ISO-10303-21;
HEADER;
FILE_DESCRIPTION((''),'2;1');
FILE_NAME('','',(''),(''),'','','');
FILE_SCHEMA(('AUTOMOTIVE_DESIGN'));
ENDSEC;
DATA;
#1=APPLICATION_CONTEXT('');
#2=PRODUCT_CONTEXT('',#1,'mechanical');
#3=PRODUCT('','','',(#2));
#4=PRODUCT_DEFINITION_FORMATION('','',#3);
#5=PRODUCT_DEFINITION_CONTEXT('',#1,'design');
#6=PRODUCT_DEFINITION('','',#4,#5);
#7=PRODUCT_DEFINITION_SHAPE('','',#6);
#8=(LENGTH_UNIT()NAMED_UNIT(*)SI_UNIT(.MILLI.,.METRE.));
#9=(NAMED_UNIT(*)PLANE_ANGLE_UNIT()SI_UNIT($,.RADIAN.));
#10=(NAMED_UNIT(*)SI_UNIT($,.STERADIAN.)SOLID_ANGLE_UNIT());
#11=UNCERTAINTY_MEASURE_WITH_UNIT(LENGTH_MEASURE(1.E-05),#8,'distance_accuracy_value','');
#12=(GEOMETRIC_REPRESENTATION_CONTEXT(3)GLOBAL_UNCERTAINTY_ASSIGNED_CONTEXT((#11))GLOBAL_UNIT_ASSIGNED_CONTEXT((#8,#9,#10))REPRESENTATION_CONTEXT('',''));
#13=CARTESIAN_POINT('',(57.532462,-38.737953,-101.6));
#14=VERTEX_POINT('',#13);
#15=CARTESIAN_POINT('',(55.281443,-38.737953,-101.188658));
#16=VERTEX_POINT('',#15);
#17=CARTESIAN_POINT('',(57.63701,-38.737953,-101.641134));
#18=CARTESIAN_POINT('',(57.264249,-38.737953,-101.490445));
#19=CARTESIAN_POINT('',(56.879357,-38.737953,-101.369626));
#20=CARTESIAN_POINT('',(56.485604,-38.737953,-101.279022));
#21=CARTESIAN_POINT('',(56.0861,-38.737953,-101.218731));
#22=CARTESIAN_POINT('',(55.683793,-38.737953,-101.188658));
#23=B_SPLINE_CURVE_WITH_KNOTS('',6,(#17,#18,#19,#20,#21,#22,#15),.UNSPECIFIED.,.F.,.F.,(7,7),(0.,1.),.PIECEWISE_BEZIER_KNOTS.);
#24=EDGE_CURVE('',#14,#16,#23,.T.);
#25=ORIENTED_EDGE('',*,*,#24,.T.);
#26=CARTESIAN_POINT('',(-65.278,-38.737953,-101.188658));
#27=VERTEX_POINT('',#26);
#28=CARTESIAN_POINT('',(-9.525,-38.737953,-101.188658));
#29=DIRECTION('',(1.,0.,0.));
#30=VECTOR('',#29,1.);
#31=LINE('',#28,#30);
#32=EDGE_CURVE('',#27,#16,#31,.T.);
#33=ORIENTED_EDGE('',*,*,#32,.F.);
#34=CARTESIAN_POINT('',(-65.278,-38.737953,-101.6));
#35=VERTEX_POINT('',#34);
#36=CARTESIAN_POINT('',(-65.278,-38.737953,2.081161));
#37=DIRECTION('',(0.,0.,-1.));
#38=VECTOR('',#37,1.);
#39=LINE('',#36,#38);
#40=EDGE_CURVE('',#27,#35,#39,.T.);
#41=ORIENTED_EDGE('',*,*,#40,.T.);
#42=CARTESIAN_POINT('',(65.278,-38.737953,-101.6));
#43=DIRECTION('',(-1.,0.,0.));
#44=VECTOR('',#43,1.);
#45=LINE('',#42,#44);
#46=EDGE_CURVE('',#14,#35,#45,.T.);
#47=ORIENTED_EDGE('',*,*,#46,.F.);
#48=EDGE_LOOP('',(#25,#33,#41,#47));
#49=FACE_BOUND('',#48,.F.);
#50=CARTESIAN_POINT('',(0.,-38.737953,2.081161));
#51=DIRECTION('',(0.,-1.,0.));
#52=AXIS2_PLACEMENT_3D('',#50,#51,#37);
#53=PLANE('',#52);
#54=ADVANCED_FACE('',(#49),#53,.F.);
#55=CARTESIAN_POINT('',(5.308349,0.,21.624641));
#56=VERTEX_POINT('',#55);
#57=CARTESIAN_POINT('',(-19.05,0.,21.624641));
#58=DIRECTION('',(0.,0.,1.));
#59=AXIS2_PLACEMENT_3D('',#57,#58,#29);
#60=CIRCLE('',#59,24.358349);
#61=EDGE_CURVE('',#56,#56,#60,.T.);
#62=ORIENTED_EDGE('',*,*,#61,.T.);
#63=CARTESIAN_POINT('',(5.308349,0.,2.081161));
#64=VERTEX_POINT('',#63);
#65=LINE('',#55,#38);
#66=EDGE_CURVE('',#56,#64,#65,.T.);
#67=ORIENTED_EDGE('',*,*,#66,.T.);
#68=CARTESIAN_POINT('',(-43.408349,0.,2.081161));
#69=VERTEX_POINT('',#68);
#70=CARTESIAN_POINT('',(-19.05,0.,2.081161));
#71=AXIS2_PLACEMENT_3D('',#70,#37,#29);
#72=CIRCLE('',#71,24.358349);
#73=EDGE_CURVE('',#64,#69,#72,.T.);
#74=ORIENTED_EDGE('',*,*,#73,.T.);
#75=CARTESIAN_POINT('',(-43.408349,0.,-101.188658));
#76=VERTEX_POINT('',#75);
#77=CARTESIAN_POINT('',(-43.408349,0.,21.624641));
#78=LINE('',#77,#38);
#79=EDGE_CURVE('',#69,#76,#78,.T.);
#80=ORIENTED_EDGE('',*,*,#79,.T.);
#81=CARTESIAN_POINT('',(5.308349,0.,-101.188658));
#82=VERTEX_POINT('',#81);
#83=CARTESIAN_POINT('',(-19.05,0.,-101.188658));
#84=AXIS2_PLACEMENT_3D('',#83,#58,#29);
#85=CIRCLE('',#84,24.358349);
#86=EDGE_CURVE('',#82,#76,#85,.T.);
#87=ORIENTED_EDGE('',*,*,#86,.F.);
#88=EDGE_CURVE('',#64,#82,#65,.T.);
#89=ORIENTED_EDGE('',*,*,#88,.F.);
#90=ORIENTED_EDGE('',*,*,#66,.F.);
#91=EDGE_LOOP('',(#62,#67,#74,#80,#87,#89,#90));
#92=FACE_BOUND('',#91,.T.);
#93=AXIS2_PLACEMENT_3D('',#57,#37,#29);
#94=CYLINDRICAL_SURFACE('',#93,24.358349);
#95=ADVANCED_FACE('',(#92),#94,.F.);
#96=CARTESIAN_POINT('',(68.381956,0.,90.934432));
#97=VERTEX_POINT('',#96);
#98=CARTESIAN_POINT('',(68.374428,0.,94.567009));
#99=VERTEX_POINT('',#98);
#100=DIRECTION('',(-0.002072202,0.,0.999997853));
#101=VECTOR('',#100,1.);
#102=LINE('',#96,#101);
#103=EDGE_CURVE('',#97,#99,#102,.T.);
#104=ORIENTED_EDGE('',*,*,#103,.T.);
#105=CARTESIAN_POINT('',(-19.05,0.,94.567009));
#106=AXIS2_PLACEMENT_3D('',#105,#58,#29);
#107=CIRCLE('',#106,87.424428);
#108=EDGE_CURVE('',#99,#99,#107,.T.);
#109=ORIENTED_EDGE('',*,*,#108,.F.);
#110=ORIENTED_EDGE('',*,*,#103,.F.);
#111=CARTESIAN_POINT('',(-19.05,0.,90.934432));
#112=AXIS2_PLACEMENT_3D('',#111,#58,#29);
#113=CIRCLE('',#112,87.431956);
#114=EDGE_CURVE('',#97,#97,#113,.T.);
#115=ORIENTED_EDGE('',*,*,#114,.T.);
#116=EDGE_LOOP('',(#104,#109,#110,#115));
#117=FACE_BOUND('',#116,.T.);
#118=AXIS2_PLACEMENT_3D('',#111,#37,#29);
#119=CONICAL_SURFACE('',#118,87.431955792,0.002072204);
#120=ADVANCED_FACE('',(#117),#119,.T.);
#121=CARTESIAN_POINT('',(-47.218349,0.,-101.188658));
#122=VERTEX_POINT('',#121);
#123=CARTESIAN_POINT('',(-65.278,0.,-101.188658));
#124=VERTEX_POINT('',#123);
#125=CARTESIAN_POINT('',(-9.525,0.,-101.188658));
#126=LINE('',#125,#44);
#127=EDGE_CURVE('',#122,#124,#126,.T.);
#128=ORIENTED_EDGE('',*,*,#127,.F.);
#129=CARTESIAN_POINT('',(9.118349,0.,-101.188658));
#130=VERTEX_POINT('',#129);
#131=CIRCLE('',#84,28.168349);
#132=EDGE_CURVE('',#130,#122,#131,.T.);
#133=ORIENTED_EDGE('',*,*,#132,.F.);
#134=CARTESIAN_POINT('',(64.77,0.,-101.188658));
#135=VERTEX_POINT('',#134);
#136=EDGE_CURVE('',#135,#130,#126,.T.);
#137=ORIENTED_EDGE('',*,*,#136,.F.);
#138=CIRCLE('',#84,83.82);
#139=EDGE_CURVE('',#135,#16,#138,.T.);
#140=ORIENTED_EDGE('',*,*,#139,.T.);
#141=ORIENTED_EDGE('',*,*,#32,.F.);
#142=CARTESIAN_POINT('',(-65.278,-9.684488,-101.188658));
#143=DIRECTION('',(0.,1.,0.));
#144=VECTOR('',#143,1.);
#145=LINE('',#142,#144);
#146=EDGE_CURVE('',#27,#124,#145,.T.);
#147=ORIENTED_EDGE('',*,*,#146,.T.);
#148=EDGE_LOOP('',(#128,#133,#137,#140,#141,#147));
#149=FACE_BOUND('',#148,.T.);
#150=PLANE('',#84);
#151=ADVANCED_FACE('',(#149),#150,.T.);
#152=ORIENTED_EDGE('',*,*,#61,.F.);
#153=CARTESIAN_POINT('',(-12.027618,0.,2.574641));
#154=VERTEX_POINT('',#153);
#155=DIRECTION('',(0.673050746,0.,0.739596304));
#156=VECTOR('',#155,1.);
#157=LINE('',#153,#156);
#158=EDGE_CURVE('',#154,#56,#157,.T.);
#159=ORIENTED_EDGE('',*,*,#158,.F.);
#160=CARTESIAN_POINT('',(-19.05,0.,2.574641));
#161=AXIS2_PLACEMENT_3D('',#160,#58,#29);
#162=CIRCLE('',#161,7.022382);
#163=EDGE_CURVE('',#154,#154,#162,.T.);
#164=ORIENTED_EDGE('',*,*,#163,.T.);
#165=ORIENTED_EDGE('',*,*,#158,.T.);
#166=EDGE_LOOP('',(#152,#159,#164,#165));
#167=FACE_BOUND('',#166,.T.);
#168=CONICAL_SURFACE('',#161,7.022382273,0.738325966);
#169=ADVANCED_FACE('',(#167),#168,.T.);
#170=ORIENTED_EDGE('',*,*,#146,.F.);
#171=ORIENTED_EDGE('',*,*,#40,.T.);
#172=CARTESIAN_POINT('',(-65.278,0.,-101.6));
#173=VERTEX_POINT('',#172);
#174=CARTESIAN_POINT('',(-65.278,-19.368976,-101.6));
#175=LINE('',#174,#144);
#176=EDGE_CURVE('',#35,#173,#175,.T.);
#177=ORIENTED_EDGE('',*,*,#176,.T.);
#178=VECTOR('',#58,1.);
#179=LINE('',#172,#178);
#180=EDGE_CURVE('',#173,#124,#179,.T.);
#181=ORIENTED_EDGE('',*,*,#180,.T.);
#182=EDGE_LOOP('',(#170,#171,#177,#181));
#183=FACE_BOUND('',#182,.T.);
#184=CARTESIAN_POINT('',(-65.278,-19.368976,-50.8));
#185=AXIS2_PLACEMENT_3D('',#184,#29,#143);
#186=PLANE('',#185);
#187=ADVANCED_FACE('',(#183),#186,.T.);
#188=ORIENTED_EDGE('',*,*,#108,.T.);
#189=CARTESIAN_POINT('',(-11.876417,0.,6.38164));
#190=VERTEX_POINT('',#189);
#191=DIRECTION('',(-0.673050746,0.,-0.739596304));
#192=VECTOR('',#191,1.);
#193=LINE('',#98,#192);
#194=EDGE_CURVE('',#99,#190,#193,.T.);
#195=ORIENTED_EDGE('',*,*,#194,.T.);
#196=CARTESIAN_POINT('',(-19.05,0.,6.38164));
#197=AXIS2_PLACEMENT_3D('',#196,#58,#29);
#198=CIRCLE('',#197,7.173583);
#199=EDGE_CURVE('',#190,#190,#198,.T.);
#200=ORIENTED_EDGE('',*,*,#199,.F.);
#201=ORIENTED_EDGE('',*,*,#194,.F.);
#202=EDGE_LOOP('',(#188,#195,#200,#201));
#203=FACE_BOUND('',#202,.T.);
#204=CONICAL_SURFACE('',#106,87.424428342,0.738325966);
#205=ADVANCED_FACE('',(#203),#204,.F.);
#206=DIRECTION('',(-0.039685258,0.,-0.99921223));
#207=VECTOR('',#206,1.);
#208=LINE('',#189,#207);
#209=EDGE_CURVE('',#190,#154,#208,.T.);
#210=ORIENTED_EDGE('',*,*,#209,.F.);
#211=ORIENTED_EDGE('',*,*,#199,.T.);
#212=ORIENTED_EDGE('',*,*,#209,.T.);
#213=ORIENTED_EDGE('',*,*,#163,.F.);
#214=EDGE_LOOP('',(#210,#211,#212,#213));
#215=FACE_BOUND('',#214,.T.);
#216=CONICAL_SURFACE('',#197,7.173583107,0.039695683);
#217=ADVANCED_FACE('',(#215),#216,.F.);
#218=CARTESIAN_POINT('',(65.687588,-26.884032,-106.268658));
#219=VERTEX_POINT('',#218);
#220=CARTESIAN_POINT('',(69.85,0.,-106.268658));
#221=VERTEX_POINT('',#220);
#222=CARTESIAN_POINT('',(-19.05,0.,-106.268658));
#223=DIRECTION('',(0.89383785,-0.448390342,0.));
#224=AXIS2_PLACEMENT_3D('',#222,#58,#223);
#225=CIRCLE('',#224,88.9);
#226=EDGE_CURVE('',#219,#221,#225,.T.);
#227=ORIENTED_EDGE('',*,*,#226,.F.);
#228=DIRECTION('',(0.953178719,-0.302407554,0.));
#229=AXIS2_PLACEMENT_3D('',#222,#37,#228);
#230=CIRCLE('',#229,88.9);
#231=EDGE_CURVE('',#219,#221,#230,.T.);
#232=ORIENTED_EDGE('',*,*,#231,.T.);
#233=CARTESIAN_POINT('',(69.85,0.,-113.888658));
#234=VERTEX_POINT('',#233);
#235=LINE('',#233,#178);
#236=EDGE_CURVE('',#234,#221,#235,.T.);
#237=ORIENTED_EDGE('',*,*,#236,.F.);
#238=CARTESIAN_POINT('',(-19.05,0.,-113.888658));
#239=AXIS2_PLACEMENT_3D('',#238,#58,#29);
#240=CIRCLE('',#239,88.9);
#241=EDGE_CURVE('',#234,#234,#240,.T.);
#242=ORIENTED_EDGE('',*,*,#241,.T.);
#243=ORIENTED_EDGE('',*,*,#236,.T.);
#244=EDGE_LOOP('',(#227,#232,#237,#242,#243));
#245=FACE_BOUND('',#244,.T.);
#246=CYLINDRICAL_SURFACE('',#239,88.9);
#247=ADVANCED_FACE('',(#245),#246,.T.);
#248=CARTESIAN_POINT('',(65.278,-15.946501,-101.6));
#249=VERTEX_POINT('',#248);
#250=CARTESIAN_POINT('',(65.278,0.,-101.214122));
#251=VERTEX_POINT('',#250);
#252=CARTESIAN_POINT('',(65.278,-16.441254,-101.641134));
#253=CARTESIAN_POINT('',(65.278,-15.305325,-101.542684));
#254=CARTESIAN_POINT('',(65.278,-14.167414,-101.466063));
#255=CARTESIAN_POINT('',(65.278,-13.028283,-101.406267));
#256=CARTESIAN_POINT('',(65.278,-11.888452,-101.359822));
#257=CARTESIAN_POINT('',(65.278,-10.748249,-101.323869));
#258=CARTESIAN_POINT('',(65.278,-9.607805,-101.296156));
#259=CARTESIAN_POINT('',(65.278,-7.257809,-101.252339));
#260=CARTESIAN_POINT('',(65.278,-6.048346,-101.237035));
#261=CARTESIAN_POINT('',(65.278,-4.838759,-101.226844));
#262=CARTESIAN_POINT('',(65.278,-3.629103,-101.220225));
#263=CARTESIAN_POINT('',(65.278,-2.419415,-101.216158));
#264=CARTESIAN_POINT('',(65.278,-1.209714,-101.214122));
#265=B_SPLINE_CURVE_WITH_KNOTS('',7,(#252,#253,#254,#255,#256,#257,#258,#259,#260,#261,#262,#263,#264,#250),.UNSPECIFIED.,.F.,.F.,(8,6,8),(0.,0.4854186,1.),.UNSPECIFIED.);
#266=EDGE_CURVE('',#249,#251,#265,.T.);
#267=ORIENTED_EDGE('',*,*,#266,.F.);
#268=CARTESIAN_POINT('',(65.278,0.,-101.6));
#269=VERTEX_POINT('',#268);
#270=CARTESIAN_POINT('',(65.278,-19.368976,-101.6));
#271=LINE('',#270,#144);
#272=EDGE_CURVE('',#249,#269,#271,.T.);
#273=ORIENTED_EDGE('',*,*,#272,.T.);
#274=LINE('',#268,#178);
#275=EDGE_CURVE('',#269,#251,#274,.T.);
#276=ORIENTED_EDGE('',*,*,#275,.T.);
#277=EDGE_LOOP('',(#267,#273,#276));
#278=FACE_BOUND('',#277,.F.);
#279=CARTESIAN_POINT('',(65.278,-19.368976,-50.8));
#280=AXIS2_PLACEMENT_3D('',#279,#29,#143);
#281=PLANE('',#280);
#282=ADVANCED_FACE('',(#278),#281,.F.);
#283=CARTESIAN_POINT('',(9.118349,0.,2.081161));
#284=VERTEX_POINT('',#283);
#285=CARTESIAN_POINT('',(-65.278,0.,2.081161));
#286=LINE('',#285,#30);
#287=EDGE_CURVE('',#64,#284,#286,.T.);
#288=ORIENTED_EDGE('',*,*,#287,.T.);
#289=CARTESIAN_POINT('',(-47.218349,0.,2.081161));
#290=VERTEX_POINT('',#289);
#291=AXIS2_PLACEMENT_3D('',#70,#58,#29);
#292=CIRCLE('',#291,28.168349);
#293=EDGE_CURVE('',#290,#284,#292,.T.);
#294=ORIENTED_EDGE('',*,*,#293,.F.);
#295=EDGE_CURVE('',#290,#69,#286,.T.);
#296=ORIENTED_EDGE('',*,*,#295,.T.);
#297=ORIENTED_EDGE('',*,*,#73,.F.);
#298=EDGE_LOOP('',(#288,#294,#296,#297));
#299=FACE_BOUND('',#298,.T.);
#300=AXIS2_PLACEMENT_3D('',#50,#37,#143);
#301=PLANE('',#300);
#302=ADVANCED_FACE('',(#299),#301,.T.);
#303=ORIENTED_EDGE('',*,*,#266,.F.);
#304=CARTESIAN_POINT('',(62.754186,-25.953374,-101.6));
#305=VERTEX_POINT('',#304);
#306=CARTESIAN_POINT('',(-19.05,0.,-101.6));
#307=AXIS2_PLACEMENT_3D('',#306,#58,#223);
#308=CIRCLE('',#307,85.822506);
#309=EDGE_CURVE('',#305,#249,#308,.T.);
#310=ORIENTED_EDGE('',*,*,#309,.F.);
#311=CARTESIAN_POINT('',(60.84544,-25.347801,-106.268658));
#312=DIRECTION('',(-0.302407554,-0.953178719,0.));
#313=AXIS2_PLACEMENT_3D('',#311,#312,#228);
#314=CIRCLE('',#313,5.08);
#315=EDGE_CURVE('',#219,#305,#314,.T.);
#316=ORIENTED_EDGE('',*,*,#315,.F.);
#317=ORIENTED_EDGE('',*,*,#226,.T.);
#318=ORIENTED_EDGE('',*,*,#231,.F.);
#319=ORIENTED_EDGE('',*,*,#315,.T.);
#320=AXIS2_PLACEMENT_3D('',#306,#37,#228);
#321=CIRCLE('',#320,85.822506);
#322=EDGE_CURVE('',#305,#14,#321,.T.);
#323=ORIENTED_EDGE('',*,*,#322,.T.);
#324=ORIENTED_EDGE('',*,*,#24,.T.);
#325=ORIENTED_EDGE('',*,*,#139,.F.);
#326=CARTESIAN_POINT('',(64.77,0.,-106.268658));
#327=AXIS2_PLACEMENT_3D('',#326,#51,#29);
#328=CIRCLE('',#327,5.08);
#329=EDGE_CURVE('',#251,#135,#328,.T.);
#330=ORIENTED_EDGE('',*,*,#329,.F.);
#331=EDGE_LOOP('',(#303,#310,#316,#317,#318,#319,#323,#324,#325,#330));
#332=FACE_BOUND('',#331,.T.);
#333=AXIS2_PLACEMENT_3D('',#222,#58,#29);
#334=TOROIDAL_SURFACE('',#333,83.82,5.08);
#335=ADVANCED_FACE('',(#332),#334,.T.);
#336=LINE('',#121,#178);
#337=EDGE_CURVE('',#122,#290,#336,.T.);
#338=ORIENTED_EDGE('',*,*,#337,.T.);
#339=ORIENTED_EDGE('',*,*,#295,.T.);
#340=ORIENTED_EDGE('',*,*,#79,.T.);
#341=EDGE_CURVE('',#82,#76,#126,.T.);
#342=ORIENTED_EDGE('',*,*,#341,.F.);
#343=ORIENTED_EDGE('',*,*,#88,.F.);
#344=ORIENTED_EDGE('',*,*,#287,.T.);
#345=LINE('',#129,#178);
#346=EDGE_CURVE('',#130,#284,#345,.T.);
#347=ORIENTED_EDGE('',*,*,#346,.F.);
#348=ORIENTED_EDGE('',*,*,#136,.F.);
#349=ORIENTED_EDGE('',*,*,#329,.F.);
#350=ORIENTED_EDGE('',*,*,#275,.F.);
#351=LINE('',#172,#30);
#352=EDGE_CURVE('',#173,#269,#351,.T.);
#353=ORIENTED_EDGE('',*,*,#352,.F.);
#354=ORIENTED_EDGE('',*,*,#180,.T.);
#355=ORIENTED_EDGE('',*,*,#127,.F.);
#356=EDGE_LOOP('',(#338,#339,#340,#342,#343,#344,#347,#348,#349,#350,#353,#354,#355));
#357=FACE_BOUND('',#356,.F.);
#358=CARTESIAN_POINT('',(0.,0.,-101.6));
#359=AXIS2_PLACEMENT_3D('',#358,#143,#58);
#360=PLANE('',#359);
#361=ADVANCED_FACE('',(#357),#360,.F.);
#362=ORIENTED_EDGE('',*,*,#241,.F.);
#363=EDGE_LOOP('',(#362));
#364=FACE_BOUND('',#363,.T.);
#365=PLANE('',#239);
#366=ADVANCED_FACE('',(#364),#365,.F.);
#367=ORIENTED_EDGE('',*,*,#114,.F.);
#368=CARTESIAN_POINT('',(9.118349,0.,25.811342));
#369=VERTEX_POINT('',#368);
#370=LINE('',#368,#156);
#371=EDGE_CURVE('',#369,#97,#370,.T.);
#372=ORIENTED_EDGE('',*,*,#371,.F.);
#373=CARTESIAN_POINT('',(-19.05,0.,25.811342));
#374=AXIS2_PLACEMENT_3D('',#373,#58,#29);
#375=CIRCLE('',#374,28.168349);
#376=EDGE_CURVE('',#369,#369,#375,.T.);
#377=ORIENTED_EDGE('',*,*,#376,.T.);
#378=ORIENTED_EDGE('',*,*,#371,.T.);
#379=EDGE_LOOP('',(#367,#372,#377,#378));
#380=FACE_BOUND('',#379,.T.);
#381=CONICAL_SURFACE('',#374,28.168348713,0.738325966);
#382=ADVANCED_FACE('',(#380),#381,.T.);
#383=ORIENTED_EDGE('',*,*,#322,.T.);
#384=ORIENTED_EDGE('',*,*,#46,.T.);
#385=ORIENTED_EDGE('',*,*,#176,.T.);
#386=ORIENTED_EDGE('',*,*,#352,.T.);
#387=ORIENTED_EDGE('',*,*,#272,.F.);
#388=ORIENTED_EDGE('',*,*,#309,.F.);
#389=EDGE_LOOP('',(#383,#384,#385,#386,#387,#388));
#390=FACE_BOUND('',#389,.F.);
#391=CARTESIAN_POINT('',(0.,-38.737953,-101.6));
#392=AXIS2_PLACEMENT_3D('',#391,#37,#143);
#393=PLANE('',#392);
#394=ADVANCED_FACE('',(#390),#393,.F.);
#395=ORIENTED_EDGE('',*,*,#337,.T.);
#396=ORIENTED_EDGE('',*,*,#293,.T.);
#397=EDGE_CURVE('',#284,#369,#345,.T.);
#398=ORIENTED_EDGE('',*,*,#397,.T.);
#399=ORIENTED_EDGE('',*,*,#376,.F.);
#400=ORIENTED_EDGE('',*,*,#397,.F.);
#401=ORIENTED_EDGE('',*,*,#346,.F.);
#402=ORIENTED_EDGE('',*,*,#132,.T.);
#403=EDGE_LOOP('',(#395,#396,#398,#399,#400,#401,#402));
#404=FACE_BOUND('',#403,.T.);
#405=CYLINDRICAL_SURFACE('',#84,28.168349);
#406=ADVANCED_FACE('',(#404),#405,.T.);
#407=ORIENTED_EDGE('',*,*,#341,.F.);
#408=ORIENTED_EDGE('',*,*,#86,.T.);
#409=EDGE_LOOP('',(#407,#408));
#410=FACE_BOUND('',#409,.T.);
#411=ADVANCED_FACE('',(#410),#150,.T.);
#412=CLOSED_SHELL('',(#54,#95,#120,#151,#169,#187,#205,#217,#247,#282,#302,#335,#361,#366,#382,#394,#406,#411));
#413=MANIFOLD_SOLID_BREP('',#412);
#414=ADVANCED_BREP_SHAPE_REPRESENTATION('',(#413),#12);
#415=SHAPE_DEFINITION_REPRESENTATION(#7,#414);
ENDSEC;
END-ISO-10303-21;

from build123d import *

# Parameters (mm, degrees)
F2_W        = 38.7379527092
F2_H        = 101.6
F2_H_2      = 2.0811606664
F3_DEPTH    = 65.278
F4_T2_ANGLE = 342.3977360444
F4_T4_ANGLE = 26.640456748


# Not quite as in the source:
# - a fillet or chamfer that OpenCascade refuses, or shapes differently, is made with other operations: its cross-section is extruded or revolved along the edge and cut away or added
# - a feature names something its author has since deleted; it is built from what else it names


with BuildPart() as f1:
    # F0 (on Front) → F1 (revolve)
    with BuildSketch(Plane.XZ):
        Polygon((-19.05, -101.1886583478), (-19.05, -113.8886583478), (69.85, -113.8886583478), (69.85, -101.1886583478), (9.1183487131, -101.1886583478), (5.3083487131, -101.1886583478), align=None)
        Polygon((5.3083487131, 21.6246411156), (5.3083487131, -101.1886583478), (9.1183487131, -101.1886583478), (9.1183487131, 25.8113416522), align=None)
        Polygon((0, 15.7914478332), (5.3083487131, 21.6246411156), (9.1183487131, 25.8113416522), (68.3819557915, 90.9344323502), (68.3744283423, 94.5670089535), (-0.0075274492, 19.4240244364), (-11.8764168927, 6.3816397113), (-12.0276177274, 2.5746411156), align=None)
    revolve(axis=Axis((-19.05, 0, -107.5386583478), (0, 0, 1)))

    # F2 (on Right) → F3 (cut, symmetric)
    with BuildSketch(Plane.YZ):
        with Locations((-19.3689763546, -50.8)):
            Rectangle(F2_W, F2_H)
        with Locations((-19.3689763546, 1.0405803332)):
            Rectangle(F2_W, F2_H_2)
    extrude(amount=F3_DEPTH, both=True, mode=Mode.SUBTRACT)

    # F4: fillet of radius 5.08 on 1 edges, made by hand

    # F4_s1 → F4_t2 (revolve, cut)
    with BuildSketch(Plane.XZ):
        with BuildLine():
            ThreePointArc((69.85, -106.2686583478), (68.3621024484, -102.6765558993), (64.77, -101.1886583478))
            Line((64.77, -101.1886583478), (69.85, -101.1886583478))
            Line((69.85, -101.1886583478), (69.85, -106.2686583478))
        make_face()
    revolve(axis=Axis((-19.05, 0, -101.1886583478), (0, 0, 1)), revolution_arc=F4_T2_ANGLE, mode=Mode.SUBTRACT)

    # F4_s3 → F4_t4 (revolve, cut)
    with BuildSketch(Plane(origin=(-3.8300767646, -7.635016329, 0), x_dir=(0, 0, 1), z_dir=(-0.4483903416, -0.8938378497, 0))):
        with BuildLine():
            ThreePointArc((-106.2686583478, -71.8723889628), (-102.6765558993, -70.3844914112), (-101.1886583478, -66.7923889628))
            Line((-101.1886583478, -66.7923889628), (-101.1886583478, -71.8723889628))
            Line((-101.1886583478, -71.8723889628), (-106.2686583478, -71.8723889628))
        make_face()
    revolve(axis=Axis((-19.05, 0, -101.1886583478), (0, 0, 1)), revolution_arc=F4_T4_ANGLE, mode=Mode.SUBTRACT)


solid = f1.part
